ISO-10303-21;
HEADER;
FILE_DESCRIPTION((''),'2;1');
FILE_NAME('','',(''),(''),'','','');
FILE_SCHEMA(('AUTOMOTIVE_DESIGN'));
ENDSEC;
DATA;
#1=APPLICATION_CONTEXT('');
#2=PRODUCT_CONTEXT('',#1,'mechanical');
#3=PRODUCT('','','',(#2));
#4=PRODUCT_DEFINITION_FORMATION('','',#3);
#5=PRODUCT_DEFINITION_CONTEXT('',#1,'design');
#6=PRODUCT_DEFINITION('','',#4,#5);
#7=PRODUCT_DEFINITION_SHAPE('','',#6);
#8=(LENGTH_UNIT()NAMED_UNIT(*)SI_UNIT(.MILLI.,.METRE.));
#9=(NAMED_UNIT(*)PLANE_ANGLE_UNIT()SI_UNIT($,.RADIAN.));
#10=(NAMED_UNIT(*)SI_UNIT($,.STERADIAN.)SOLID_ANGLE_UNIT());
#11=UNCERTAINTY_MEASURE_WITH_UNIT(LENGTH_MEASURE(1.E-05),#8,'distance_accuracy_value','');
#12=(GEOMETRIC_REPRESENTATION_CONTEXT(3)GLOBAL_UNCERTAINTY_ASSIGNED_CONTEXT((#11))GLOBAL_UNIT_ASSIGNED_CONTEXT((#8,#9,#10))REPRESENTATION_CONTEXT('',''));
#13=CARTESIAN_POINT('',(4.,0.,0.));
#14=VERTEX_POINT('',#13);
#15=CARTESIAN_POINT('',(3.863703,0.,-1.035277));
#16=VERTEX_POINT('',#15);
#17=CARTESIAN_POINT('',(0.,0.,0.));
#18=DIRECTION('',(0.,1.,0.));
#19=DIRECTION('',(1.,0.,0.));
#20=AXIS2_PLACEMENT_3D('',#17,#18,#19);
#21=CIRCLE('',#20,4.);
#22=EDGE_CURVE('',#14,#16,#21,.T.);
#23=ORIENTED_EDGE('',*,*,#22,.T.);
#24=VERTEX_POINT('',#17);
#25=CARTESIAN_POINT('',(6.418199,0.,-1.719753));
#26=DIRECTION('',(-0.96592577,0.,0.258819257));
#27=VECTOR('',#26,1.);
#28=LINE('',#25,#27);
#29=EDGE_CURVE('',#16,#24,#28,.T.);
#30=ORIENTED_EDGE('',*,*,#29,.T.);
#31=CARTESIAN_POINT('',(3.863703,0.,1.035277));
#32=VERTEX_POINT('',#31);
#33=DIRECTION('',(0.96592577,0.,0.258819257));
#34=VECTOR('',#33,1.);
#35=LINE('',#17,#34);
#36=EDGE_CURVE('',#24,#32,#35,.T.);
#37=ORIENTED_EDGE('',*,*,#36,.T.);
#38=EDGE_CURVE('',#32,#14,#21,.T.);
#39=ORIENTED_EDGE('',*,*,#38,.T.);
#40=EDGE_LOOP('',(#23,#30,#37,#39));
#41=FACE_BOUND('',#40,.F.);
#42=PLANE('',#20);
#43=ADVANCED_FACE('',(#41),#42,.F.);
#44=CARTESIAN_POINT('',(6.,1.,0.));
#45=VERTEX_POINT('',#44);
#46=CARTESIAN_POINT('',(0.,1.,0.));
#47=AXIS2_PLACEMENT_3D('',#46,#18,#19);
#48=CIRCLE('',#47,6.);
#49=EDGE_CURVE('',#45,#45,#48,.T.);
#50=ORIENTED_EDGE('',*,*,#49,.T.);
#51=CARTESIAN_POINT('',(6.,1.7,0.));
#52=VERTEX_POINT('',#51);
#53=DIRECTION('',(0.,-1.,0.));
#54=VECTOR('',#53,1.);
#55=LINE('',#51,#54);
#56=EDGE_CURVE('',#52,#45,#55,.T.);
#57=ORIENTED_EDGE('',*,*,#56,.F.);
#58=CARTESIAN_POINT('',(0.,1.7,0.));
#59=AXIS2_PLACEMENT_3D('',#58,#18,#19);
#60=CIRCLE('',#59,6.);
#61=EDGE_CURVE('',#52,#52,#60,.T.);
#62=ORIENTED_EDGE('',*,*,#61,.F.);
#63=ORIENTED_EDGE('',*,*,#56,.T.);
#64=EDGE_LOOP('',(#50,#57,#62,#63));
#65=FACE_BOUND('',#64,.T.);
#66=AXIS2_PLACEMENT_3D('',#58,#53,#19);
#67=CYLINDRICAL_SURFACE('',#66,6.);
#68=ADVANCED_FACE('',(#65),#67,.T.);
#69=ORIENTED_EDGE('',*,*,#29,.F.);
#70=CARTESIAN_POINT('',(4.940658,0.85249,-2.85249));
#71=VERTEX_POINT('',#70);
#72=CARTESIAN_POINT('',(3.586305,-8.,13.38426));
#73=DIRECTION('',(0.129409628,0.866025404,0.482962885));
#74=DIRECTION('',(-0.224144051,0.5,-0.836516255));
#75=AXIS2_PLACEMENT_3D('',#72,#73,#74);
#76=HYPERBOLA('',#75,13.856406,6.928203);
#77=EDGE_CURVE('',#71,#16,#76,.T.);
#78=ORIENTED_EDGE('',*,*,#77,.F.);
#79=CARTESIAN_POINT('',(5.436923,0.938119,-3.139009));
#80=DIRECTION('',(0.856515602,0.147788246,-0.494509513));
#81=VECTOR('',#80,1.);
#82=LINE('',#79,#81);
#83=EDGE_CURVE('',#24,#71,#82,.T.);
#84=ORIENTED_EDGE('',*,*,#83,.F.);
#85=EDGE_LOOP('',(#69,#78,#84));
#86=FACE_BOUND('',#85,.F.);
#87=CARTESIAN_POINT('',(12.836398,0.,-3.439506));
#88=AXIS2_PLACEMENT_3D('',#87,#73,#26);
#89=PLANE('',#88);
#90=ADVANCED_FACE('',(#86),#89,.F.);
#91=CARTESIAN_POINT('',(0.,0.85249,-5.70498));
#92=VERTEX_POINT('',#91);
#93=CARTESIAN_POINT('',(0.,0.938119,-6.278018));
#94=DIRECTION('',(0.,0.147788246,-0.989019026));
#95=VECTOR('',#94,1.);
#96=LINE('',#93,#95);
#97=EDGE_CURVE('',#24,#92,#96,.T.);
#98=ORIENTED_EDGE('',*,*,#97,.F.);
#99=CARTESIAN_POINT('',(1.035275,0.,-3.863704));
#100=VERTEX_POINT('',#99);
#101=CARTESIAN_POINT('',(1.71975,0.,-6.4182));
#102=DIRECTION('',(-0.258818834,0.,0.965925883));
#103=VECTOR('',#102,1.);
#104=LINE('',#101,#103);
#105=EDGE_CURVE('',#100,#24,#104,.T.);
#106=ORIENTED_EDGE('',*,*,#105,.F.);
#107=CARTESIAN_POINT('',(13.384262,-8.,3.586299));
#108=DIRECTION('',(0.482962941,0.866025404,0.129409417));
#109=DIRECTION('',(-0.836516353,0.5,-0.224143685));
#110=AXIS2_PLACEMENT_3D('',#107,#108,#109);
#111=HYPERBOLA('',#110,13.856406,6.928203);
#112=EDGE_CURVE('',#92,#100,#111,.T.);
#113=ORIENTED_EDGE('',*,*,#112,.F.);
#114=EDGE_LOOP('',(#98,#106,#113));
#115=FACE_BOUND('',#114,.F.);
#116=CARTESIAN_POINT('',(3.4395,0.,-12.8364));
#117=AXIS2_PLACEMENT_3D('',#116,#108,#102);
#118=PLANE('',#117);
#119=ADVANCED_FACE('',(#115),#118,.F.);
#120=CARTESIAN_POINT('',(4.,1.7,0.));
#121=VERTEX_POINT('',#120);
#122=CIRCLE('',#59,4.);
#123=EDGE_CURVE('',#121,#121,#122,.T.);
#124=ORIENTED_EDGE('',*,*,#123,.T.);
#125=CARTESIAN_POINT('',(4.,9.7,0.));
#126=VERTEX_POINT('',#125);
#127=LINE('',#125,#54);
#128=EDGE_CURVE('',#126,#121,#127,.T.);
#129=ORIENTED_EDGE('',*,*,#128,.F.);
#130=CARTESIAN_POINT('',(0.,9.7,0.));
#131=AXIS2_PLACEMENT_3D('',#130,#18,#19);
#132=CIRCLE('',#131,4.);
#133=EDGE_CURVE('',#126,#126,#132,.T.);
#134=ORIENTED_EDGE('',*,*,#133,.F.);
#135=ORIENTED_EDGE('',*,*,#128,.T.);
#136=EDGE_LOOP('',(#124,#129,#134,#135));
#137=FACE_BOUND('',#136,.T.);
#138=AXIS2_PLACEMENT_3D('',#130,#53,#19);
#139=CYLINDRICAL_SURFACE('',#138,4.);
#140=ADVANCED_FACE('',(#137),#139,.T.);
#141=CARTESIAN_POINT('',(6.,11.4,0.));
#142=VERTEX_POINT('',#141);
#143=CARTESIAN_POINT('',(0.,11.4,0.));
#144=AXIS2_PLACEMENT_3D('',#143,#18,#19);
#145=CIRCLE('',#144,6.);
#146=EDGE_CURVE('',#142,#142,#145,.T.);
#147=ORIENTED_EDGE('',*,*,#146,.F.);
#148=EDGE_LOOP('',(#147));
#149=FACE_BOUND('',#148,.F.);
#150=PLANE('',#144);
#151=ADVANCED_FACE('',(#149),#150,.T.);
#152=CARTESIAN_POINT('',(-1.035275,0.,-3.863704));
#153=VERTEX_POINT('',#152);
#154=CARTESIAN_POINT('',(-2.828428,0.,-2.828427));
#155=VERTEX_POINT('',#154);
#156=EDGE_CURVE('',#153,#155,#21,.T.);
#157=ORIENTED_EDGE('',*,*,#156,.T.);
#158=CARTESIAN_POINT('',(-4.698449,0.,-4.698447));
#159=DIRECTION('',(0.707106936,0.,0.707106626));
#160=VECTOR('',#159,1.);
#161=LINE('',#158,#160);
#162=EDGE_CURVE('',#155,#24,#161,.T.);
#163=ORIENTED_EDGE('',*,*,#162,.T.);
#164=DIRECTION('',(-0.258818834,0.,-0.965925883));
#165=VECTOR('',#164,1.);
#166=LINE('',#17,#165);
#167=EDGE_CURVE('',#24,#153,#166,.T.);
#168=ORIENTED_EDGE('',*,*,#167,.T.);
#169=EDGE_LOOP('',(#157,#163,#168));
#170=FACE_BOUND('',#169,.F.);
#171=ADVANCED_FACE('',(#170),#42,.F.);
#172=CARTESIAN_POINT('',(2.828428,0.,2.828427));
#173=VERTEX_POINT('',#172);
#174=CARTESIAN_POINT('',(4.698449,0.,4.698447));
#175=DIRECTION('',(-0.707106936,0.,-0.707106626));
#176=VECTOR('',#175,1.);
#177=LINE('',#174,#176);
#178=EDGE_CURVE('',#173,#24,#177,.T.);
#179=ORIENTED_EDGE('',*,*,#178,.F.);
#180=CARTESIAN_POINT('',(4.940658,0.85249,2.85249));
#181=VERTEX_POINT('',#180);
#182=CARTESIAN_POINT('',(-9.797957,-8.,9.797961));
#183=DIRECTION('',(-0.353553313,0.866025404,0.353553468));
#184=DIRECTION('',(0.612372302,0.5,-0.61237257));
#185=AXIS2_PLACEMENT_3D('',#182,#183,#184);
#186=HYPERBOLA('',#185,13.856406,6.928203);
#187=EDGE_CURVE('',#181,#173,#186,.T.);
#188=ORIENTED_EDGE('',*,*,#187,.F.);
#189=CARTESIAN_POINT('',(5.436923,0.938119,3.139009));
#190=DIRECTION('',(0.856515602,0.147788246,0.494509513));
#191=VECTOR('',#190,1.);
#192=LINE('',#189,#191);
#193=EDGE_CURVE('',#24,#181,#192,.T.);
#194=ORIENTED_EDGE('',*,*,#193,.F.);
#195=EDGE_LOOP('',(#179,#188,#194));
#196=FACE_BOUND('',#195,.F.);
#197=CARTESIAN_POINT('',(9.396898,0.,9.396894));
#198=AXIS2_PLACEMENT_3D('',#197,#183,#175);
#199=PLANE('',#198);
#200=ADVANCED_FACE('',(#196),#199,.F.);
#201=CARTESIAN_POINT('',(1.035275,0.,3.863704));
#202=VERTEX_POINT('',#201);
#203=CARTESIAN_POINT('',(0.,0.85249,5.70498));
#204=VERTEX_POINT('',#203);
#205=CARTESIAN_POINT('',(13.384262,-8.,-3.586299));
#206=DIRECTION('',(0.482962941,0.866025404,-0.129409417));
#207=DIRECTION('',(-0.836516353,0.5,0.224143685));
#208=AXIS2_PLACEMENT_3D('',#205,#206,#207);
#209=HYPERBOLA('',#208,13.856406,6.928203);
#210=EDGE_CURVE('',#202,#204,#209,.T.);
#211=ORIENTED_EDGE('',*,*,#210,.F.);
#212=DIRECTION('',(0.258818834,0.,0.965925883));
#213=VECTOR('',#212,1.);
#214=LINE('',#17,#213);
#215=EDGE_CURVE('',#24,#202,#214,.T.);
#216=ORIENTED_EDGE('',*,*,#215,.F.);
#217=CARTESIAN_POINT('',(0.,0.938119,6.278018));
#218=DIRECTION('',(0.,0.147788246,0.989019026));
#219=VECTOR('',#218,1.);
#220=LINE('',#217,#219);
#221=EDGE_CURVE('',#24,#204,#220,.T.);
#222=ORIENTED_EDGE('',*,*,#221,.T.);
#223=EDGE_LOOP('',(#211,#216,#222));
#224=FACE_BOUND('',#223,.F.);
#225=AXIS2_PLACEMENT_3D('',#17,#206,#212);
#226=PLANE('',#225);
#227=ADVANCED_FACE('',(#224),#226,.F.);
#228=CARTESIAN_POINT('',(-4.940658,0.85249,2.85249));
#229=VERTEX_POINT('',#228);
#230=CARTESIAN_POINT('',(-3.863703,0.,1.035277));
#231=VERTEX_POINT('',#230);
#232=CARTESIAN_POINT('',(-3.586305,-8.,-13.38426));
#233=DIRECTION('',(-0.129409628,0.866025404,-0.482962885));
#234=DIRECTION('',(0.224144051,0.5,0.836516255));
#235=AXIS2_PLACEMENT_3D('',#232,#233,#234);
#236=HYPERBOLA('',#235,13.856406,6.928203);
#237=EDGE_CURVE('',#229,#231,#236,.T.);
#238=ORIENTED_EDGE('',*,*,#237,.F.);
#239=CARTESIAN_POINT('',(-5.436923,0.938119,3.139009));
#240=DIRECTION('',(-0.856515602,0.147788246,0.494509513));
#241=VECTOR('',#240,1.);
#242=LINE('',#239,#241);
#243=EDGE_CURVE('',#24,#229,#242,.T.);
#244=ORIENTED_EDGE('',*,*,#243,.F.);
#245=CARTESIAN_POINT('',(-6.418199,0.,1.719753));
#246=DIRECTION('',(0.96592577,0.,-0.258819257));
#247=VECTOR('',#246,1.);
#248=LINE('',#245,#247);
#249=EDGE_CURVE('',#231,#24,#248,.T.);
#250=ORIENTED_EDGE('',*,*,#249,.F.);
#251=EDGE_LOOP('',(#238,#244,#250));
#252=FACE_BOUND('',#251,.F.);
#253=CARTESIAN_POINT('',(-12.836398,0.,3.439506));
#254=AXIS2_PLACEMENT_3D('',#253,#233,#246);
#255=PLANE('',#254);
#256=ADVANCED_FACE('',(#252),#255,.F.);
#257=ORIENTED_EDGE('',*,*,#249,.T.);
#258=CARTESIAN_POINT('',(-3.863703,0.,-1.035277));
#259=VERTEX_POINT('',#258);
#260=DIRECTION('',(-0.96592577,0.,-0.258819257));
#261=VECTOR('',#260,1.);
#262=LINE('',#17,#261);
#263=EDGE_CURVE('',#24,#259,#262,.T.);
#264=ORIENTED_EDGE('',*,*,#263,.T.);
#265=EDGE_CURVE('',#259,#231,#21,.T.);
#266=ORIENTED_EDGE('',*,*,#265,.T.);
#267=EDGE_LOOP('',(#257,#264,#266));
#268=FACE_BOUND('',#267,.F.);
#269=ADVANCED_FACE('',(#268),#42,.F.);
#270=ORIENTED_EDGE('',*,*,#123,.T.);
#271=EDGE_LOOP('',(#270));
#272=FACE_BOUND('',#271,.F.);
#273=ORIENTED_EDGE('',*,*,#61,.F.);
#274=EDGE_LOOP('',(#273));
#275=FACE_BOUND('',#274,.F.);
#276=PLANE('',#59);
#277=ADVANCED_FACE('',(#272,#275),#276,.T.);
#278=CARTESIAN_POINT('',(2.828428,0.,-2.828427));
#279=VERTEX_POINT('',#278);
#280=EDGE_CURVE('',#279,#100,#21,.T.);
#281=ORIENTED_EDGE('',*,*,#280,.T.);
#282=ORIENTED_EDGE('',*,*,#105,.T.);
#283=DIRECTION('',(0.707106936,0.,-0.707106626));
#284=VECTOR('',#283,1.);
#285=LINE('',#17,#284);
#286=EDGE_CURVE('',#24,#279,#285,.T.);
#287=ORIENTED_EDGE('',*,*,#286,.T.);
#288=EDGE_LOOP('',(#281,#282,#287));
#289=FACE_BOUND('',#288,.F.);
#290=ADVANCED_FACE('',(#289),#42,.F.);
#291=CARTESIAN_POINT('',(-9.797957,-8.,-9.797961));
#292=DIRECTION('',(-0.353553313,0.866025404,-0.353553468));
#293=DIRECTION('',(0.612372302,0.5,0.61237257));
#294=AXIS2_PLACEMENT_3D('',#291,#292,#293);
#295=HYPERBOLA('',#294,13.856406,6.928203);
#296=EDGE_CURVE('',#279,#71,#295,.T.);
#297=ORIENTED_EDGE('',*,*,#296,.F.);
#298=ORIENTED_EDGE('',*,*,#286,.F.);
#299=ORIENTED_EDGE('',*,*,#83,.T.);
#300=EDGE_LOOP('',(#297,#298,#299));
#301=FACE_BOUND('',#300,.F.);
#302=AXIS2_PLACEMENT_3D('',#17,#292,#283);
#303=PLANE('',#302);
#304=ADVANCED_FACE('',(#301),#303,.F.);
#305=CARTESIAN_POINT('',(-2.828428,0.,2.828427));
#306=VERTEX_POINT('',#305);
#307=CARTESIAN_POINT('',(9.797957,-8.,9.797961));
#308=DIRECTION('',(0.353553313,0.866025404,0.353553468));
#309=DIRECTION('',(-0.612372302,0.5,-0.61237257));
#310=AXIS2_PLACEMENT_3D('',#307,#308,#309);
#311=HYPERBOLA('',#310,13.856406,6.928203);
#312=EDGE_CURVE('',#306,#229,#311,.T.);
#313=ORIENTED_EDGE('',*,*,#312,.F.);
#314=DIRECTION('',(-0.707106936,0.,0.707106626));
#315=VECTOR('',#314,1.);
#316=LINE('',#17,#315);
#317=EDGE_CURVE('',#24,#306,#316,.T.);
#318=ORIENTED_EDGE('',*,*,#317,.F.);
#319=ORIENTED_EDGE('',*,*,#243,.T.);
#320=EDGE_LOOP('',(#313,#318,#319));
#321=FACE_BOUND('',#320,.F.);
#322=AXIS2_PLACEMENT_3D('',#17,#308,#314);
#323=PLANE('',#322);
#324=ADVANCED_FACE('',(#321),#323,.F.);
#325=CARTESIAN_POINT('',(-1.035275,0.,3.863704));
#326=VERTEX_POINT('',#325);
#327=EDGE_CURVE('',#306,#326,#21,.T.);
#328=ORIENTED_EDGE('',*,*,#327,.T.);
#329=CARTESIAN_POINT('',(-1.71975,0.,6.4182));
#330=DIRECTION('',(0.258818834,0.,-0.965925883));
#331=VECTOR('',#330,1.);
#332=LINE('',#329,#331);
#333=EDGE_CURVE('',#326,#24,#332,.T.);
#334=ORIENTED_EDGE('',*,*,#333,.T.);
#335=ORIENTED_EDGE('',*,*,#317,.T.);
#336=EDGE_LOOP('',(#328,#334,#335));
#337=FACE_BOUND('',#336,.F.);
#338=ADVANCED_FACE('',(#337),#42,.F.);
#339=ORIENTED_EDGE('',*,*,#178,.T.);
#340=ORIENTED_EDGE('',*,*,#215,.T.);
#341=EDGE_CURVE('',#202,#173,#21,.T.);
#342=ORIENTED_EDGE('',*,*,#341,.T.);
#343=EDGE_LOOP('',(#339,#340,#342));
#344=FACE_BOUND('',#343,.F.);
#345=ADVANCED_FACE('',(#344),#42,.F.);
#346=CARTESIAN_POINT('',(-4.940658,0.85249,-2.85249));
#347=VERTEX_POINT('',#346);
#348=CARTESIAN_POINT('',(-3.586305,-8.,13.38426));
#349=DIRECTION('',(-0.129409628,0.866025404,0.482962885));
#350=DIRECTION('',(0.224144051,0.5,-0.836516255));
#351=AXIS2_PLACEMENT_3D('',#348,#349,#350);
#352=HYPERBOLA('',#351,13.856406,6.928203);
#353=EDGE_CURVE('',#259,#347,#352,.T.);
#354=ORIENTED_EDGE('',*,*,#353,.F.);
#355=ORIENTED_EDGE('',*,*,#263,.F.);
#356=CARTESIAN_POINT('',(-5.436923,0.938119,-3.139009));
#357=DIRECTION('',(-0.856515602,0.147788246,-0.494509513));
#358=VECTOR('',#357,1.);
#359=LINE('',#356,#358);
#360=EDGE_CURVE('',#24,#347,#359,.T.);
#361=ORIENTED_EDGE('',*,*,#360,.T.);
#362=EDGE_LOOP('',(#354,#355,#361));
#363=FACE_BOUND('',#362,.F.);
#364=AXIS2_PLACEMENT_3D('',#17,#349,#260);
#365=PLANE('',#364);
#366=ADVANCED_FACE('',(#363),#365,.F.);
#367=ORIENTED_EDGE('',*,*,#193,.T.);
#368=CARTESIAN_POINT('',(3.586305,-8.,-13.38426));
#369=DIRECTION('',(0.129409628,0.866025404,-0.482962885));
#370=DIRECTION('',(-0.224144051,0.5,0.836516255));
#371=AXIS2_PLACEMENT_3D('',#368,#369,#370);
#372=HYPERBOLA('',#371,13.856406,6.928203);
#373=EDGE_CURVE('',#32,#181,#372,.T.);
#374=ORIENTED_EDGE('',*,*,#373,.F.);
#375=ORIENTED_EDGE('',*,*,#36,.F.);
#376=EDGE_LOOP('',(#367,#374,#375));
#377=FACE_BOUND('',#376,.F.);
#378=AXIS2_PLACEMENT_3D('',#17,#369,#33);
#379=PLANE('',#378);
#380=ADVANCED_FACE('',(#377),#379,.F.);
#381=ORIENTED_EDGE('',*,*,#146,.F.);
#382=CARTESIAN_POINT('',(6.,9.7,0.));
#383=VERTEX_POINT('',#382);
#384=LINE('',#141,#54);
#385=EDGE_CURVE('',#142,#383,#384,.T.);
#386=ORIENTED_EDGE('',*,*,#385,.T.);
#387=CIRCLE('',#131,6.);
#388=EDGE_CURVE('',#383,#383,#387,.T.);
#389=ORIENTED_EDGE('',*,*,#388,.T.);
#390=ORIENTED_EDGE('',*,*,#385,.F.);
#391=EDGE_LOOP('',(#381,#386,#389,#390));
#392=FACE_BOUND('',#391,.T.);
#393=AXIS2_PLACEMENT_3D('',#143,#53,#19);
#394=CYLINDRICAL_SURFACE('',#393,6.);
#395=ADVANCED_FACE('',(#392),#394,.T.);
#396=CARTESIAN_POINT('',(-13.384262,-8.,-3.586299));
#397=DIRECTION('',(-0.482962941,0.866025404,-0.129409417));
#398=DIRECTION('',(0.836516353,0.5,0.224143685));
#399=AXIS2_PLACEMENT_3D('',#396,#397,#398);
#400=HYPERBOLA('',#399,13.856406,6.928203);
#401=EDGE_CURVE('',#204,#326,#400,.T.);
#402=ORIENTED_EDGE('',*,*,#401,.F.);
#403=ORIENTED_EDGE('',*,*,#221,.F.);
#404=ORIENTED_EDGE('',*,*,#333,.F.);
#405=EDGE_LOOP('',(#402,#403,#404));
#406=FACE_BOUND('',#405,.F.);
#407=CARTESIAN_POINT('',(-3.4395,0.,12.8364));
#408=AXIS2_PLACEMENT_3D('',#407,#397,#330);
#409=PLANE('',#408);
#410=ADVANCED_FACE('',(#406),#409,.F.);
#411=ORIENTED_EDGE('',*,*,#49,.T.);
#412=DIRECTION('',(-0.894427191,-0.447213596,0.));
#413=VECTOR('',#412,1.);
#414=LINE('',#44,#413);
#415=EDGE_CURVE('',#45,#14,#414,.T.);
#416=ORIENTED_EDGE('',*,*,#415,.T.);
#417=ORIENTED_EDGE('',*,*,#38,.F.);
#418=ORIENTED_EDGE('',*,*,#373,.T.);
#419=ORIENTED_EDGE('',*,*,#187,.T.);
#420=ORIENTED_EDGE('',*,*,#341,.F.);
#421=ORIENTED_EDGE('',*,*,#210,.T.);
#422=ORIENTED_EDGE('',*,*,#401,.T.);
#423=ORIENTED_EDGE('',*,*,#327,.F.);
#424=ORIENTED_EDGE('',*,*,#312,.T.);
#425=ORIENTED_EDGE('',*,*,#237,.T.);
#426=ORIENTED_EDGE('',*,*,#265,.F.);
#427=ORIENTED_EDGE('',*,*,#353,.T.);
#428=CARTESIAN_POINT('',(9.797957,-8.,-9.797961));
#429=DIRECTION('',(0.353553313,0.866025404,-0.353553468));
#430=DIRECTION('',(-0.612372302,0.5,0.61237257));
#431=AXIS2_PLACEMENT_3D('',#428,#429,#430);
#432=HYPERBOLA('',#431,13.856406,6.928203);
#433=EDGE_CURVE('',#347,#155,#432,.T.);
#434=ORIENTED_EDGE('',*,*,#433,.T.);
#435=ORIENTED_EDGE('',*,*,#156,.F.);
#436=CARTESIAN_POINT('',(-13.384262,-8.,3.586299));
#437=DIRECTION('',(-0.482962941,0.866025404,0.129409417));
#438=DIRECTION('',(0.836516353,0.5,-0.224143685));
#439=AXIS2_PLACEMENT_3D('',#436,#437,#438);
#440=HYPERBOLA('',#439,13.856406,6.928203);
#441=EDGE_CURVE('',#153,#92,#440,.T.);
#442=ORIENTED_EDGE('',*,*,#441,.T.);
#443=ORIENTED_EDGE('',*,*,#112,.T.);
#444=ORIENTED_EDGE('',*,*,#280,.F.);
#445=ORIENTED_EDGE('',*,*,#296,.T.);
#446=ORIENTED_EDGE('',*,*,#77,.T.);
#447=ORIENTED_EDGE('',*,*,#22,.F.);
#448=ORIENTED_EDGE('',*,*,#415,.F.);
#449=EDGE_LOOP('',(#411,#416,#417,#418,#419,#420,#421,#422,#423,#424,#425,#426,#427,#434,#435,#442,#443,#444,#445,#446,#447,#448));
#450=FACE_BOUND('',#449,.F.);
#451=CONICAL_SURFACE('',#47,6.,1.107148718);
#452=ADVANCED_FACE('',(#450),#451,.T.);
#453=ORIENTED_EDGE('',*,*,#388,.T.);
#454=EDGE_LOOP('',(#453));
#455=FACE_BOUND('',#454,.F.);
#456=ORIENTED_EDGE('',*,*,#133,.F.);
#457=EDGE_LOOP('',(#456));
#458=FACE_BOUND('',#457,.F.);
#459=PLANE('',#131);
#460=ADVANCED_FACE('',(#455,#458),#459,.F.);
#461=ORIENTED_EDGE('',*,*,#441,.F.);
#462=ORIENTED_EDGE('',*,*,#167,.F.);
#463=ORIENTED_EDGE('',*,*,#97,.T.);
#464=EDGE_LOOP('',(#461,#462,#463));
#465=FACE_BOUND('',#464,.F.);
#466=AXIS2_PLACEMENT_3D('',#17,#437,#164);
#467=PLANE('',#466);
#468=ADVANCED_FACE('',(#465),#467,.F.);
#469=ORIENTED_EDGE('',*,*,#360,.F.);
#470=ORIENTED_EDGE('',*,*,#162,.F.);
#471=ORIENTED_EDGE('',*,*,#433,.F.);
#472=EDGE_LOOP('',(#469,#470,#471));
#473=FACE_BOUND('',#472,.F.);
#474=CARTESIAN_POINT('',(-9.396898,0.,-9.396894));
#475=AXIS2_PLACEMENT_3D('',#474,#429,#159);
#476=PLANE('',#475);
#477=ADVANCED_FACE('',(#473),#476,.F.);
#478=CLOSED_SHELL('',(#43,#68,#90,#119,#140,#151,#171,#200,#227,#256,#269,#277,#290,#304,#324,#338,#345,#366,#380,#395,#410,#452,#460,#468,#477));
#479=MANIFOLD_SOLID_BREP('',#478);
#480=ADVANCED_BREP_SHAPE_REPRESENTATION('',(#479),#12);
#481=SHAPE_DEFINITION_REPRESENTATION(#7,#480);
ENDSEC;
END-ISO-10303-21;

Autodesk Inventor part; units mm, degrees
ref_plane "YZ Plane" through (0, 0, 0) normal (1, 0, 0) x (0, 1, 0)
ref_plane "XZ Plane" through (0, 0, 0) normal (0, 1, 0) x (-1, 0, 0)
ref_plane "XY Plane" through (0, 0, 0) normal (0, 0, 1) x (1, 0, 0)
sketch "Sketch1" plane through (0, 0, 0) normal (0, 0, 1) x (1, 0, 0)
  line L0 (0, 0) -> (0, 11.4)
  line L1 (0, 11.4) -> (6, 11.4)
  line L2 (6, 11.4) -> (6, 9.7)
  line L3 (6, 9.7) -> (4, 9.7)
  line L4 (4, 9.7) -> (4, 1.7)
  line L5 (4, 1.7) -> (6, 1.7)
  line L6 (6, 1.7) -> (6, 1)
  line L7 (4, 0) -> (0, 0)
  line L8 (6, 1) -> (4, 0)
  point P0 (6, 0)
  dimension "d0" = 8
  dimension "d1" = 6
  dimension "d2" = 4
  dimension "d3" = 1.7
  dimension "d5" = 1.7
  dimension "d6" = 1
  dimension "d7" = 2
revolve "Revolution1" add sketch "Sketch1" angle 360 about axis through (0, 0, 0) along (0, 1, 0)
sketch "Sketch2" plane through (0, 0, 0) normal (0, -1, 0) x (1, 0, 0)
  line L0 (0, 0) -> (3.4395, 12.8364)
  line L1 (3.4395, 12.8364) -> (-3.4395, 12.8364)
  line L2 (-3.4395, 12.8364) -> (0, 0)
  line L3 (0, 0) -> (0, -2.5884)
  dimension "d8" = 30
extrude "Extrusion1" cut sketch "Sketch2" against normal blind 1.2 draft -60
pattern_circular "Circular Pattern1" count 6 over 360 about axis through (0, -10, 0) along (0, 1, 0) of "Extrusion1"
equation "\"d2\" = d25"
equation "\"d25\" = 4"
properties part number "Wheel 75 mm - Part 5"
